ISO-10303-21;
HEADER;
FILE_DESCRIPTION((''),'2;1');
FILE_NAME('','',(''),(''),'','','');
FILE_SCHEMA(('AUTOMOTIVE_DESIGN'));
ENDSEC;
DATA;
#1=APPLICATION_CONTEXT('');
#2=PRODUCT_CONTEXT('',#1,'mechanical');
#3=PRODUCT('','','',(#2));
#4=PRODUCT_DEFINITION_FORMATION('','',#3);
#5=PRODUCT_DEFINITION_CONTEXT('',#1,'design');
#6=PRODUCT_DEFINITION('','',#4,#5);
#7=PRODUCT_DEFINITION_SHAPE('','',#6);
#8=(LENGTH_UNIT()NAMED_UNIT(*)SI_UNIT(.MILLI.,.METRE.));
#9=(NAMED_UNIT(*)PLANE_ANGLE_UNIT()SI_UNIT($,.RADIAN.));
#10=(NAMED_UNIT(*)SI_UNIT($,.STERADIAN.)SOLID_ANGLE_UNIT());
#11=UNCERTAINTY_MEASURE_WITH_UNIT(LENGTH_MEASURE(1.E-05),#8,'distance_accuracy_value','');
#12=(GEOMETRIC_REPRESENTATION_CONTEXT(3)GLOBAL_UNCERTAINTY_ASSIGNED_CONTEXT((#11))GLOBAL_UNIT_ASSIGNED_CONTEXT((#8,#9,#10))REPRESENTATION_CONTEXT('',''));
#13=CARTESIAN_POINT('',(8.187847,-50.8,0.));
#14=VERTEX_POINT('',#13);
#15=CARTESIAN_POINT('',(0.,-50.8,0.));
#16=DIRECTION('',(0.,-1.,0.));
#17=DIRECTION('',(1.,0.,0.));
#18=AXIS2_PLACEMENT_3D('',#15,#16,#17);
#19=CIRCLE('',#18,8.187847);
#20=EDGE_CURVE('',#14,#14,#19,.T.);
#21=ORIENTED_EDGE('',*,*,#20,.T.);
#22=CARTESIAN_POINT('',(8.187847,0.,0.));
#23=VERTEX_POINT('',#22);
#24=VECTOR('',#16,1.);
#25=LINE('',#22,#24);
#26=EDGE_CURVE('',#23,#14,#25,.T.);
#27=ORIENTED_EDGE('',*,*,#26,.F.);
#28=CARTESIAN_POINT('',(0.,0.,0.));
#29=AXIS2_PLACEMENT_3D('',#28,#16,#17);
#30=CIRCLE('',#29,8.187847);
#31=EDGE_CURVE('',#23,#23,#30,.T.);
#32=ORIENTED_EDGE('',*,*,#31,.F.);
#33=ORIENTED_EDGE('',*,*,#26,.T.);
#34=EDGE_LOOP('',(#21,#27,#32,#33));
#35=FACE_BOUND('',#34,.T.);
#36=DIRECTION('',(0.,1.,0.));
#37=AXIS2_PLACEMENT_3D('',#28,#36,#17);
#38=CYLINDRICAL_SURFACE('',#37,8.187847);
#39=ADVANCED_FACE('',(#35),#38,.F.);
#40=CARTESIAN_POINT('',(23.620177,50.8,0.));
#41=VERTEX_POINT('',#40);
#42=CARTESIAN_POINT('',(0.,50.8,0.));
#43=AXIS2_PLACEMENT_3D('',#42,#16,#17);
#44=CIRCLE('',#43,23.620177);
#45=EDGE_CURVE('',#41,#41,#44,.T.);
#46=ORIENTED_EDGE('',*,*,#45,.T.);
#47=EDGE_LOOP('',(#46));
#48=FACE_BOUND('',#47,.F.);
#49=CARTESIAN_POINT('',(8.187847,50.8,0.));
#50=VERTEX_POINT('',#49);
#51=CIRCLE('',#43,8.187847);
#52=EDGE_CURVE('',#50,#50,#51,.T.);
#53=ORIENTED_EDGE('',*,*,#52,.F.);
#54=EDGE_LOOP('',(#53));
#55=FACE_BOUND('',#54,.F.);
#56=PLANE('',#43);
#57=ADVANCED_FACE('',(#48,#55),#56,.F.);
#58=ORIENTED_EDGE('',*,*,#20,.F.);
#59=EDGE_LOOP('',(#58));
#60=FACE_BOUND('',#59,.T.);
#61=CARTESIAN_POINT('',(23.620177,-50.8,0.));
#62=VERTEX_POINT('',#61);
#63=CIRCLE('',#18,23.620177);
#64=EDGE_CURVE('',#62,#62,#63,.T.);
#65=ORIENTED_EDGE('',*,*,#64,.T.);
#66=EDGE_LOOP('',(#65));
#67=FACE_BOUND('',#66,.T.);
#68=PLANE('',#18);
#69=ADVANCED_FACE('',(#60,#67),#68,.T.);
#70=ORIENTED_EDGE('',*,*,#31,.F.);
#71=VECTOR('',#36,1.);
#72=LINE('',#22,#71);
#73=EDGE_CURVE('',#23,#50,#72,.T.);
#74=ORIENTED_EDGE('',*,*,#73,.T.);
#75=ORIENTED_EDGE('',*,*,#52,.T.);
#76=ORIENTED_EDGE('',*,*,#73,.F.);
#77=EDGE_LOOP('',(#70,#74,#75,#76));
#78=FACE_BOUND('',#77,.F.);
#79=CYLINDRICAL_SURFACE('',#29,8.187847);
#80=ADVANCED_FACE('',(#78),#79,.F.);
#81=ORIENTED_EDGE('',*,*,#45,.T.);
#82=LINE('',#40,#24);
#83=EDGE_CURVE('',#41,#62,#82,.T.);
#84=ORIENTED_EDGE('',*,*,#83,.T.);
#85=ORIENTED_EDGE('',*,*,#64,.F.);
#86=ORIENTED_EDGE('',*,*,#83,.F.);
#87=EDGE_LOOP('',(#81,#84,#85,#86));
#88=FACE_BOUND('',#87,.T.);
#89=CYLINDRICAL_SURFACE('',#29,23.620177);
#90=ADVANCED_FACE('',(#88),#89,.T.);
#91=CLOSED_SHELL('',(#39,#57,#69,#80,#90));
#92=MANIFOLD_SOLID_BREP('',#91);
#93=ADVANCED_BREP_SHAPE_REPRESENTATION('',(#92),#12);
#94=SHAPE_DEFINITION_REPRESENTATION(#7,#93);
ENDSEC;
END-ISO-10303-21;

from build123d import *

# Parameters (mm, degrees)
F0_R          = 23.6201773587
F0_R_2        = 8.1878472109
F1_DEPTH      = 50.8
F1_DEPTH_BACK = 50.8


# Not quite as in the source:
# - the program builds the solid bodies; features that only make, move or delete a surface that nothing else refers to are left out


with BuildPart() as f1:
    # F0 (on Front) → F1 (new body, two sides)
    with BuildSketch(Plane.XZ) as f1_sk:
        Circle(F0_R)
        Circle(F0_R_2, mode=Mode.SUBTRACT)
    extrude(amount=F1_DEPTH)
    extrude(f1_sk.sketch, amount=-F1_DEPTH_BACK)


solid = f1.part
